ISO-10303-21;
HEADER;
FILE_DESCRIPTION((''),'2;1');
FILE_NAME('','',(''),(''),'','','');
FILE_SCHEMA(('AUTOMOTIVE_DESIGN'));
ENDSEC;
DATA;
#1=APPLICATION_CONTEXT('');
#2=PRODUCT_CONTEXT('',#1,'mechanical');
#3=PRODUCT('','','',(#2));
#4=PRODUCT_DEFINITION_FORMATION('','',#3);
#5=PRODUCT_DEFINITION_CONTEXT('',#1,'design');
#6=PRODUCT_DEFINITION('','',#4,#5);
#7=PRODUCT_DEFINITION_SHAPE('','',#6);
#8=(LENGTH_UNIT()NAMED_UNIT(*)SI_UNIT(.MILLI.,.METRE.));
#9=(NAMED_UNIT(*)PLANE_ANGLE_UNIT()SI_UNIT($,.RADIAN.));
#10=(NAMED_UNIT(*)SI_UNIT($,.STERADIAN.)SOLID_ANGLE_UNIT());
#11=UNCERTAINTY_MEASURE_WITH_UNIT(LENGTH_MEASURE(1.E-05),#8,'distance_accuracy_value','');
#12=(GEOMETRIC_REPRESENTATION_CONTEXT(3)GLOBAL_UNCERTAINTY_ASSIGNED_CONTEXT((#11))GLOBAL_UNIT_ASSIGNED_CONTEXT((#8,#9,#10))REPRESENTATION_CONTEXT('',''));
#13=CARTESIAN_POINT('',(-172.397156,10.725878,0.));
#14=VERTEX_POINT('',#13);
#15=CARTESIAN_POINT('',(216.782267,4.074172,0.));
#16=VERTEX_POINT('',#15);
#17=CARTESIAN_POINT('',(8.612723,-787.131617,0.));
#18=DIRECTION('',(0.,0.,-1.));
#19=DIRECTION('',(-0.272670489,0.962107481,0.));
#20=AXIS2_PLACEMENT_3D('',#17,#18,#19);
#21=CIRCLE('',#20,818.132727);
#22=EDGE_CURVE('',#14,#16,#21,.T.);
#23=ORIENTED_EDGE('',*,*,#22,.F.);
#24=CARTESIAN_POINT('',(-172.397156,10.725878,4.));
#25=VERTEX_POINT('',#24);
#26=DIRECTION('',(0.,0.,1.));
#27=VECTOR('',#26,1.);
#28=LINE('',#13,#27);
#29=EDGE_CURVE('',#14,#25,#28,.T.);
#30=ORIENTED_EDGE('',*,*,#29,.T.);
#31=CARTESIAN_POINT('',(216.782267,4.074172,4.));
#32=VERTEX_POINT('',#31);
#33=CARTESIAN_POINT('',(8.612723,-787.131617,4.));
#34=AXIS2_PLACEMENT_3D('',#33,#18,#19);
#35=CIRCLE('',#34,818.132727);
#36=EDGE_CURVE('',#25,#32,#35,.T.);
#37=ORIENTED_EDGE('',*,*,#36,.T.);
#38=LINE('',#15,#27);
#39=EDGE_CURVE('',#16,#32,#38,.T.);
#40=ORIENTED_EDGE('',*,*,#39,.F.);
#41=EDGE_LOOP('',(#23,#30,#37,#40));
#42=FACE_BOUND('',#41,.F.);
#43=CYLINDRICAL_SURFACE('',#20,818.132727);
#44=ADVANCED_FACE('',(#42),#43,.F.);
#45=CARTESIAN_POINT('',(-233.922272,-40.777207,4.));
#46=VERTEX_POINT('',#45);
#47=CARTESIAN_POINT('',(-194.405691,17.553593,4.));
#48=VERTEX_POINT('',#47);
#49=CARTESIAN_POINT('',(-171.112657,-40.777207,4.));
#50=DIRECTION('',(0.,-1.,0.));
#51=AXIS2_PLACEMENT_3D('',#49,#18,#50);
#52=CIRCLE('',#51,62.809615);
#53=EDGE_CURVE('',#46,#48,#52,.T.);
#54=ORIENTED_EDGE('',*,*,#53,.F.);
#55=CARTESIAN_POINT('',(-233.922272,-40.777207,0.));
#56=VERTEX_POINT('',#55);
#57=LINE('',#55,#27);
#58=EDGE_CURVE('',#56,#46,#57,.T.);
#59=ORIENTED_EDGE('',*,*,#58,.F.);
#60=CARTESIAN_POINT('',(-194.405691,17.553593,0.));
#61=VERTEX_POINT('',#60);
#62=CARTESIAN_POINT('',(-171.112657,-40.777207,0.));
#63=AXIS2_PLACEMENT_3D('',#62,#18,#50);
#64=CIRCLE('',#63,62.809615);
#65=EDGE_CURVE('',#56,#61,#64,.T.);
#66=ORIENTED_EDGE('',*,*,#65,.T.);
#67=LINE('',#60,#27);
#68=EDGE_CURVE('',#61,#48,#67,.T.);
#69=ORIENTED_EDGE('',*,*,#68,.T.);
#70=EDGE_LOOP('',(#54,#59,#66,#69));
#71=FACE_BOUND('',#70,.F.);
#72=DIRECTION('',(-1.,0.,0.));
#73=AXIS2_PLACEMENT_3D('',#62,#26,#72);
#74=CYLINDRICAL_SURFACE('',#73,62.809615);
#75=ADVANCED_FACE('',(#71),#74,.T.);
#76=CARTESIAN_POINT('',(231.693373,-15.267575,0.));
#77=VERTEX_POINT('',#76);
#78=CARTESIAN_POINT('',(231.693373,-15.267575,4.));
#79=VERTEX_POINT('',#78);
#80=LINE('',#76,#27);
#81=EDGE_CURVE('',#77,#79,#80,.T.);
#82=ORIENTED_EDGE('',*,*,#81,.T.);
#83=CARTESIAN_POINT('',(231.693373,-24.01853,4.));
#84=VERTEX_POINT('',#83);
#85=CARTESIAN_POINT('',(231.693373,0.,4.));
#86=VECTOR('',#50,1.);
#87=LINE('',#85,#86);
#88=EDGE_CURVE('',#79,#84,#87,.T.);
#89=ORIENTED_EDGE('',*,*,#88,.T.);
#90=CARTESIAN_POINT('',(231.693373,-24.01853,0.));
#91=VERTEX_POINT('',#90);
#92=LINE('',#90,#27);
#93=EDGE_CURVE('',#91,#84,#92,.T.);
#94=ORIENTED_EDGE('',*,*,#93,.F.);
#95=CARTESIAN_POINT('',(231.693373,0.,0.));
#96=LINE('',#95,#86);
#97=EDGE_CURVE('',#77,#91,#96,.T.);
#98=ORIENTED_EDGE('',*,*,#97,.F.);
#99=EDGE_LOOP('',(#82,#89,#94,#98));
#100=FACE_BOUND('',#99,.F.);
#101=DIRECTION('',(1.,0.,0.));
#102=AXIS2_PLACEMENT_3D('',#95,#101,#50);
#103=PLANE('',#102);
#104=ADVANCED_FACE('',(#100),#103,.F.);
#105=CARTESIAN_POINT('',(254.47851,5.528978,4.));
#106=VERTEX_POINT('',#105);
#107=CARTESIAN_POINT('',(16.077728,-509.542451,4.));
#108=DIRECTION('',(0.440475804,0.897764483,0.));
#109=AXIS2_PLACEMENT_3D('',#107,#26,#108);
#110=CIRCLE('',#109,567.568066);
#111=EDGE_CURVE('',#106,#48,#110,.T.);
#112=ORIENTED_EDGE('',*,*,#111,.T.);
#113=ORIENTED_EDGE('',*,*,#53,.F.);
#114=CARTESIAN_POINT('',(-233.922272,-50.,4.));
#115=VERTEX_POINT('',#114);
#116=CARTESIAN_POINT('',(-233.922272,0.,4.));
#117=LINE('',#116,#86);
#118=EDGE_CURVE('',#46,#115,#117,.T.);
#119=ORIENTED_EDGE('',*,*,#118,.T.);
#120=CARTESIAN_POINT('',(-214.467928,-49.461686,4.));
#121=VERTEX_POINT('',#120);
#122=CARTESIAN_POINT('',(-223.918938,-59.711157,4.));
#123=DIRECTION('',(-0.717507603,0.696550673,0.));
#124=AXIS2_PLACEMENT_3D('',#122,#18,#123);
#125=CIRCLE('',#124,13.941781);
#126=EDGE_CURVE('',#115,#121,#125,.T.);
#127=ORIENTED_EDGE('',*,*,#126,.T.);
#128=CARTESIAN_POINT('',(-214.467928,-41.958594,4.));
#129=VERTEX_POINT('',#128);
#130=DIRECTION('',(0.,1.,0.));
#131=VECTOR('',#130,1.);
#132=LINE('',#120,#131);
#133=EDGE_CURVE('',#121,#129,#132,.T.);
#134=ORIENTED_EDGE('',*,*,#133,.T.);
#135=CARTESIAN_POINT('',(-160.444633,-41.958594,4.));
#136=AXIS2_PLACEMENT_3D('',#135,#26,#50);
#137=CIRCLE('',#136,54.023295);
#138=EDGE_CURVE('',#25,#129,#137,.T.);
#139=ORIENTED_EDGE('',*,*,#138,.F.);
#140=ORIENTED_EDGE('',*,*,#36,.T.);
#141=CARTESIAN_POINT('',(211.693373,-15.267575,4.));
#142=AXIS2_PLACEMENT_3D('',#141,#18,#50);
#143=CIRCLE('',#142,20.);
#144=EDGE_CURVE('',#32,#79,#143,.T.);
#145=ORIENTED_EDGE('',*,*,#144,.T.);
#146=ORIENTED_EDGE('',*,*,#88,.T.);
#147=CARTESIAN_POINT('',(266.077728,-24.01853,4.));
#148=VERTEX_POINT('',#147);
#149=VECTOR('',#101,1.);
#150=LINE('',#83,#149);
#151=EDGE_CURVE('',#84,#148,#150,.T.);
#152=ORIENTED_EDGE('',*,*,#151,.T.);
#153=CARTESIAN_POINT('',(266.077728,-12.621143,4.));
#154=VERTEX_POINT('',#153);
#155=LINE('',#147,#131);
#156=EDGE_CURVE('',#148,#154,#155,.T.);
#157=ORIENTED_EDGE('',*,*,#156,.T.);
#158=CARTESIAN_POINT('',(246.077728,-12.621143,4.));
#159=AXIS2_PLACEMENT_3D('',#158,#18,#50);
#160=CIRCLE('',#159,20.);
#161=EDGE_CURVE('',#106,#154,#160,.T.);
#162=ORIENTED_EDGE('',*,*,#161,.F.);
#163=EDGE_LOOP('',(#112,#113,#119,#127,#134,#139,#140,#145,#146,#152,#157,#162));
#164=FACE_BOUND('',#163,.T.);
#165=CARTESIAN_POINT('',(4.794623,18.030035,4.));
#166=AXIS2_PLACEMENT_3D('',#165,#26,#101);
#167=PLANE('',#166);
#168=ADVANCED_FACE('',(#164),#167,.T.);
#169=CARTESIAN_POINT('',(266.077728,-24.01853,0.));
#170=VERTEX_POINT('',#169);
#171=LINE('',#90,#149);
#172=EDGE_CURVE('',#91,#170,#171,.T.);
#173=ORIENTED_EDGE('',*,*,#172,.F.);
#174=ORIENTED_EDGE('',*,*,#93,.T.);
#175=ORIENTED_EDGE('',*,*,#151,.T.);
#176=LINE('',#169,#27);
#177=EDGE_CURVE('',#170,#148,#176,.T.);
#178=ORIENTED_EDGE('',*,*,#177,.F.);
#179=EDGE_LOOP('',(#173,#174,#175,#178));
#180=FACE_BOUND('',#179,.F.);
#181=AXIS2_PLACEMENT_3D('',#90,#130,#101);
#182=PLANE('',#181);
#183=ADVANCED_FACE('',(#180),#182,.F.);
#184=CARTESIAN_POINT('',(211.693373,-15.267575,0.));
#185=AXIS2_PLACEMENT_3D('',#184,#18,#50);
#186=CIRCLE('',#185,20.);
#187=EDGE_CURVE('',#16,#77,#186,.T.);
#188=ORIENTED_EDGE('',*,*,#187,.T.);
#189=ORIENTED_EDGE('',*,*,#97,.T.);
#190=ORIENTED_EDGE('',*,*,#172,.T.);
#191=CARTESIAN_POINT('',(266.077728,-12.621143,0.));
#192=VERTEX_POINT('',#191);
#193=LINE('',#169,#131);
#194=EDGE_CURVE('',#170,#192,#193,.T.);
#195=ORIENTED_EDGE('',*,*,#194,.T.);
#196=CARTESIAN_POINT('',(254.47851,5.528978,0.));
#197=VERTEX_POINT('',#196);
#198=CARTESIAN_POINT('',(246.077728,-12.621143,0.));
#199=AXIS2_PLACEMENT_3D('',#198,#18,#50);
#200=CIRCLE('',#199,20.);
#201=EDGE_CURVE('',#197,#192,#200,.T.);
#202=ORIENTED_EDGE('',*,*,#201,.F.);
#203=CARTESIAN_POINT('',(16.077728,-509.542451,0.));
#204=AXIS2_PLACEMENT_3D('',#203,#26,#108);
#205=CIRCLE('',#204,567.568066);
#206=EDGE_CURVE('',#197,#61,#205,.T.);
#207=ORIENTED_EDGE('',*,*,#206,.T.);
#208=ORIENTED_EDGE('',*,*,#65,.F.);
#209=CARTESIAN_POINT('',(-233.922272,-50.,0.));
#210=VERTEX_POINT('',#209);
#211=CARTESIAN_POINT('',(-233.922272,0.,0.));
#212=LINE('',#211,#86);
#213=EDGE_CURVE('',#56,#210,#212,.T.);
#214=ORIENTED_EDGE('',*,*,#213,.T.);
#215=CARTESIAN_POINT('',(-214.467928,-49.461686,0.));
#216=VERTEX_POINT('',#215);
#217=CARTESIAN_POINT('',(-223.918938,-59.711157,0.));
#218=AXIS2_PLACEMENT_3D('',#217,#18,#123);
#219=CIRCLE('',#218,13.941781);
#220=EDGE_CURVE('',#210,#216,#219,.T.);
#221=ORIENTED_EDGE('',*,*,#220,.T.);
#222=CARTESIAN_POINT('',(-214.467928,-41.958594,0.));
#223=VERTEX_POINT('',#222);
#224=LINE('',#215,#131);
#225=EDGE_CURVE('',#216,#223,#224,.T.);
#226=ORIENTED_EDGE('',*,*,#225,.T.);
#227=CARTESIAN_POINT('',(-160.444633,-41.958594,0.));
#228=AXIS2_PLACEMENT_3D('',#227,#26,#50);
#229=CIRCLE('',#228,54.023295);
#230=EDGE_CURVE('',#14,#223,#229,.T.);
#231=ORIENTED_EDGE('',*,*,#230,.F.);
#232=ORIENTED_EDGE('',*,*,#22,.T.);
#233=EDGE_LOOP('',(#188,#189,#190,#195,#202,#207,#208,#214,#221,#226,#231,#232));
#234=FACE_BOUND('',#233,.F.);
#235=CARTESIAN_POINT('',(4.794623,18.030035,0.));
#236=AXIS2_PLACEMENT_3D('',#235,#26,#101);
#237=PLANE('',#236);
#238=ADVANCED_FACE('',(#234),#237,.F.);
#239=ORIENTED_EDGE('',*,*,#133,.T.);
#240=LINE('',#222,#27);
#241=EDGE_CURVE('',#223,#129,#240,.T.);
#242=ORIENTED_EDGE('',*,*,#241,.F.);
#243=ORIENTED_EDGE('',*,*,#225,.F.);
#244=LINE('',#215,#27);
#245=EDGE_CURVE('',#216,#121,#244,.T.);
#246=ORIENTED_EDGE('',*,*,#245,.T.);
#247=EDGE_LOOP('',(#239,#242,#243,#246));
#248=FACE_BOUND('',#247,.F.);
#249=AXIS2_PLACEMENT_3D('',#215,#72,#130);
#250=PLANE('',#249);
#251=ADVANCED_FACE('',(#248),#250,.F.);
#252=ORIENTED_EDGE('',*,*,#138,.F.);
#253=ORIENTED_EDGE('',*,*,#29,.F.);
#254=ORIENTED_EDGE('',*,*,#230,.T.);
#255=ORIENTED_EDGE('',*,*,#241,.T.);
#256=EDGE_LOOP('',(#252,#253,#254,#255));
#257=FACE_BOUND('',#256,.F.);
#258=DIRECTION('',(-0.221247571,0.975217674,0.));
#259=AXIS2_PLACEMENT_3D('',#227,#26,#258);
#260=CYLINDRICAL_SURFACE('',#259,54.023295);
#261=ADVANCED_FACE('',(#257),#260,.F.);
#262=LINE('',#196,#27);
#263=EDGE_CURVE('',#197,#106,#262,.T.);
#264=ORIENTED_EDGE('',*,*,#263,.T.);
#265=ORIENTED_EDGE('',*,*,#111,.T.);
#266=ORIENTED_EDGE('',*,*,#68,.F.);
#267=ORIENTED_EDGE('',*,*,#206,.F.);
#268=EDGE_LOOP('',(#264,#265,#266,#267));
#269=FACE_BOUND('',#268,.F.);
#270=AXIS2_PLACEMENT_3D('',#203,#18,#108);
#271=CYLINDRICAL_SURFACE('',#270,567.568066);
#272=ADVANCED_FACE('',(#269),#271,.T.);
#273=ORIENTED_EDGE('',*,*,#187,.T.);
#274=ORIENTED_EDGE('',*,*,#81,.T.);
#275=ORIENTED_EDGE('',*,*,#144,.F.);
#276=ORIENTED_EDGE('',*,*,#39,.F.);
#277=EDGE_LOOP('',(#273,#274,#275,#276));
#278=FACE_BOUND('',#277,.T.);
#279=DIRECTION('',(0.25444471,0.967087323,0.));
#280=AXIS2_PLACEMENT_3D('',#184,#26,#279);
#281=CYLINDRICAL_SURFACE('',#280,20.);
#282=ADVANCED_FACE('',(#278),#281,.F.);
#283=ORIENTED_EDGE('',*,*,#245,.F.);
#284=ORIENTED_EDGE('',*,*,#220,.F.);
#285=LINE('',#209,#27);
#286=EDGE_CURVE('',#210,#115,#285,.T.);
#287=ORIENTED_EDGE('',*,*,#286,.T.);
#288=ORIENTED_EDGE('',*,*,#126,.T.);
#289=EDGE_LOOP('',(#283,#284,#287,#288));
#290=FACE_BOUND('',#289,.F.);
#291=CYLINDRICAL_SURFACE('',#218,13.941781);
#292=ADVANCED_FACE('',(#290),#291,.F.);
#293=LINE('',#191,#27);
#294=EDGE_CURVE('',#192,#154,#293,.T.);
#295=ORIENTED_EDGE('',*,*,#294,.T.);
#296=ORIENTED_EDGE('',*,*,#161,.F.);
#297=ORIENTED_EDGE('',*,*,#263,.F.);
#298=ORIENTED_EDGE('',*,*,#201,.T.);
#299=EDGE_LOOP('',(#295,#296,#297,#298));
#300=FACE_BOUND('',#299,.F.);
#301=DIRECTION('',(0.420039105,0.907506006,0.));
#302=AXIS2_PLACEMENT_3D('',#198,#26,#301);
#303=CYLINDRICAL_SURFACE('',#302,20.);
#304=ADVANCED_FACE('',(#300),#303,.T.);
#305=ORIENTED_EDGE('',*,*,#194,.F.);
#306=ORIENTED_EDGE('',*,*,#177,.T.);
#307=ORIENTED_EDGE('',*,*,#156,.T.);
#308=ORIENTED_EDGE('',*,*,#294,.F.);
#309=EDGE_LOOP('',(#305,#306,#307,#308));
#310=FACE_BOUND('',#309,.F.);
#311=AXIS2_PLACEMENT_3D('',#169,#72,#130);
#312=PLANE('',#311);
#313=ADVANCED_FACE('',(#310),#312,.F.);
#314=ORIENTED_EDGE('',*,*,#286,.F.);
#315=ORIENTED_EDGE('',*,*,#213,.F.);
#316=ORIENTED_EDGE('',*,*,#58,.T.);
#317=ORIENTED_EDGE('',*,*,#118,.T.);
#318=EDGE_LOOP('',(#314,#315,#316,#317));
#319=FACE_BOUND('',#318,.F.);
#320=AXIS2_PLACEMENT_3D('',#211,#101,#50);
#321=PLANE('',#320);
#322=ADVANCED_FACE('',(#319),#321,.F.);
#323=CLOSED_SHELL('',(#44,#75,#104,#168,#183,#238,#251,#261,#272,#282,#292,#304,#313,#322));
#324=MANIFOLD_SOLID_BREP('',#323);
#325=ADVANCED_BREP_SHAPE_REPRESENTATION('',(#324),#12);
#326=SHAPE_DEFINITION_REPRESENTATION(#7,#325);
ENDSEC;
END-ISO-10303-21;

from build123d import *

# Parameters (mm, degrees)
F1_DEPTH = 4
F2_R     = 54.0232948569
F3_R     = 62.809614709
F4_W     = 34.3843554476
F4_H     = 20.342006709
F5_DEPTH = 4
F7_R     = 20


with BuildPart() as f1:
    # F0 (on Top) → F1 (new body)
    with BuildSketch(Plane.XY):
        with BuildLine():
            ThreePointArc((-214.4679278135, 0), (8.6127225609, 31.0011100466), (231.6933729353, 0))
            Line((231.6933729353, 0), (231.6933729353, -24.0185298026))
            Line((231.6933729353, -24.0185298026), (266.0777283828, -24.0185298026))
            Line((266.0777283828, -24.0185298026), (266.0777283828, 0))
            ThreePointArc((266.0777283828, 0), (16.0777283828, 58.0256148842), (-233.9222716172, 0))
            Line((-233.9222716172, 0), (-233.9222716172, -50))
            ThreePointArc((-233.9222716172, -50), (-224.3045684517, -45.7747103429), (-214.4679278135, -49.461685773))
            Line((-214.4679278135, -49.461685773), (-214.4679278135, 0))
        make_face()
    extrude(amount=F1_DEPTH)

    # F2
    f2_edges = [f1.edges().sort_by_distance(p)[0] for p in [
        (-214.467928, 0, 2),
    ]]
    fillet(f2_edges, radius=F2_R)

    # F3
    f3_edges = [f1.edges().sort_by_distance(p)[0] for p in [
        (-233.922272, 0, 2),
    ]]
    fillet(f3_edges, radius=F3_R)

    # F7
    f7_edges = [f1.edges().sort_by_distance(p)[0] for p in [
        (266.077728, 0, 2),
        (231.693373, 0, 2),
    ]]
    fillet(f7_edges, radius=F7_R)


with BuildPart() as f5:
    # F4 (on face) → F5 (new body)
    with BuildSketch(Plane.XY.offset(4)):
        with Locations((248.885550659, -10.1710033545)):
            Rectangle(F4_W, F4_H)
    extrude(amount=F5_DEPTH)


solid = f1.part
